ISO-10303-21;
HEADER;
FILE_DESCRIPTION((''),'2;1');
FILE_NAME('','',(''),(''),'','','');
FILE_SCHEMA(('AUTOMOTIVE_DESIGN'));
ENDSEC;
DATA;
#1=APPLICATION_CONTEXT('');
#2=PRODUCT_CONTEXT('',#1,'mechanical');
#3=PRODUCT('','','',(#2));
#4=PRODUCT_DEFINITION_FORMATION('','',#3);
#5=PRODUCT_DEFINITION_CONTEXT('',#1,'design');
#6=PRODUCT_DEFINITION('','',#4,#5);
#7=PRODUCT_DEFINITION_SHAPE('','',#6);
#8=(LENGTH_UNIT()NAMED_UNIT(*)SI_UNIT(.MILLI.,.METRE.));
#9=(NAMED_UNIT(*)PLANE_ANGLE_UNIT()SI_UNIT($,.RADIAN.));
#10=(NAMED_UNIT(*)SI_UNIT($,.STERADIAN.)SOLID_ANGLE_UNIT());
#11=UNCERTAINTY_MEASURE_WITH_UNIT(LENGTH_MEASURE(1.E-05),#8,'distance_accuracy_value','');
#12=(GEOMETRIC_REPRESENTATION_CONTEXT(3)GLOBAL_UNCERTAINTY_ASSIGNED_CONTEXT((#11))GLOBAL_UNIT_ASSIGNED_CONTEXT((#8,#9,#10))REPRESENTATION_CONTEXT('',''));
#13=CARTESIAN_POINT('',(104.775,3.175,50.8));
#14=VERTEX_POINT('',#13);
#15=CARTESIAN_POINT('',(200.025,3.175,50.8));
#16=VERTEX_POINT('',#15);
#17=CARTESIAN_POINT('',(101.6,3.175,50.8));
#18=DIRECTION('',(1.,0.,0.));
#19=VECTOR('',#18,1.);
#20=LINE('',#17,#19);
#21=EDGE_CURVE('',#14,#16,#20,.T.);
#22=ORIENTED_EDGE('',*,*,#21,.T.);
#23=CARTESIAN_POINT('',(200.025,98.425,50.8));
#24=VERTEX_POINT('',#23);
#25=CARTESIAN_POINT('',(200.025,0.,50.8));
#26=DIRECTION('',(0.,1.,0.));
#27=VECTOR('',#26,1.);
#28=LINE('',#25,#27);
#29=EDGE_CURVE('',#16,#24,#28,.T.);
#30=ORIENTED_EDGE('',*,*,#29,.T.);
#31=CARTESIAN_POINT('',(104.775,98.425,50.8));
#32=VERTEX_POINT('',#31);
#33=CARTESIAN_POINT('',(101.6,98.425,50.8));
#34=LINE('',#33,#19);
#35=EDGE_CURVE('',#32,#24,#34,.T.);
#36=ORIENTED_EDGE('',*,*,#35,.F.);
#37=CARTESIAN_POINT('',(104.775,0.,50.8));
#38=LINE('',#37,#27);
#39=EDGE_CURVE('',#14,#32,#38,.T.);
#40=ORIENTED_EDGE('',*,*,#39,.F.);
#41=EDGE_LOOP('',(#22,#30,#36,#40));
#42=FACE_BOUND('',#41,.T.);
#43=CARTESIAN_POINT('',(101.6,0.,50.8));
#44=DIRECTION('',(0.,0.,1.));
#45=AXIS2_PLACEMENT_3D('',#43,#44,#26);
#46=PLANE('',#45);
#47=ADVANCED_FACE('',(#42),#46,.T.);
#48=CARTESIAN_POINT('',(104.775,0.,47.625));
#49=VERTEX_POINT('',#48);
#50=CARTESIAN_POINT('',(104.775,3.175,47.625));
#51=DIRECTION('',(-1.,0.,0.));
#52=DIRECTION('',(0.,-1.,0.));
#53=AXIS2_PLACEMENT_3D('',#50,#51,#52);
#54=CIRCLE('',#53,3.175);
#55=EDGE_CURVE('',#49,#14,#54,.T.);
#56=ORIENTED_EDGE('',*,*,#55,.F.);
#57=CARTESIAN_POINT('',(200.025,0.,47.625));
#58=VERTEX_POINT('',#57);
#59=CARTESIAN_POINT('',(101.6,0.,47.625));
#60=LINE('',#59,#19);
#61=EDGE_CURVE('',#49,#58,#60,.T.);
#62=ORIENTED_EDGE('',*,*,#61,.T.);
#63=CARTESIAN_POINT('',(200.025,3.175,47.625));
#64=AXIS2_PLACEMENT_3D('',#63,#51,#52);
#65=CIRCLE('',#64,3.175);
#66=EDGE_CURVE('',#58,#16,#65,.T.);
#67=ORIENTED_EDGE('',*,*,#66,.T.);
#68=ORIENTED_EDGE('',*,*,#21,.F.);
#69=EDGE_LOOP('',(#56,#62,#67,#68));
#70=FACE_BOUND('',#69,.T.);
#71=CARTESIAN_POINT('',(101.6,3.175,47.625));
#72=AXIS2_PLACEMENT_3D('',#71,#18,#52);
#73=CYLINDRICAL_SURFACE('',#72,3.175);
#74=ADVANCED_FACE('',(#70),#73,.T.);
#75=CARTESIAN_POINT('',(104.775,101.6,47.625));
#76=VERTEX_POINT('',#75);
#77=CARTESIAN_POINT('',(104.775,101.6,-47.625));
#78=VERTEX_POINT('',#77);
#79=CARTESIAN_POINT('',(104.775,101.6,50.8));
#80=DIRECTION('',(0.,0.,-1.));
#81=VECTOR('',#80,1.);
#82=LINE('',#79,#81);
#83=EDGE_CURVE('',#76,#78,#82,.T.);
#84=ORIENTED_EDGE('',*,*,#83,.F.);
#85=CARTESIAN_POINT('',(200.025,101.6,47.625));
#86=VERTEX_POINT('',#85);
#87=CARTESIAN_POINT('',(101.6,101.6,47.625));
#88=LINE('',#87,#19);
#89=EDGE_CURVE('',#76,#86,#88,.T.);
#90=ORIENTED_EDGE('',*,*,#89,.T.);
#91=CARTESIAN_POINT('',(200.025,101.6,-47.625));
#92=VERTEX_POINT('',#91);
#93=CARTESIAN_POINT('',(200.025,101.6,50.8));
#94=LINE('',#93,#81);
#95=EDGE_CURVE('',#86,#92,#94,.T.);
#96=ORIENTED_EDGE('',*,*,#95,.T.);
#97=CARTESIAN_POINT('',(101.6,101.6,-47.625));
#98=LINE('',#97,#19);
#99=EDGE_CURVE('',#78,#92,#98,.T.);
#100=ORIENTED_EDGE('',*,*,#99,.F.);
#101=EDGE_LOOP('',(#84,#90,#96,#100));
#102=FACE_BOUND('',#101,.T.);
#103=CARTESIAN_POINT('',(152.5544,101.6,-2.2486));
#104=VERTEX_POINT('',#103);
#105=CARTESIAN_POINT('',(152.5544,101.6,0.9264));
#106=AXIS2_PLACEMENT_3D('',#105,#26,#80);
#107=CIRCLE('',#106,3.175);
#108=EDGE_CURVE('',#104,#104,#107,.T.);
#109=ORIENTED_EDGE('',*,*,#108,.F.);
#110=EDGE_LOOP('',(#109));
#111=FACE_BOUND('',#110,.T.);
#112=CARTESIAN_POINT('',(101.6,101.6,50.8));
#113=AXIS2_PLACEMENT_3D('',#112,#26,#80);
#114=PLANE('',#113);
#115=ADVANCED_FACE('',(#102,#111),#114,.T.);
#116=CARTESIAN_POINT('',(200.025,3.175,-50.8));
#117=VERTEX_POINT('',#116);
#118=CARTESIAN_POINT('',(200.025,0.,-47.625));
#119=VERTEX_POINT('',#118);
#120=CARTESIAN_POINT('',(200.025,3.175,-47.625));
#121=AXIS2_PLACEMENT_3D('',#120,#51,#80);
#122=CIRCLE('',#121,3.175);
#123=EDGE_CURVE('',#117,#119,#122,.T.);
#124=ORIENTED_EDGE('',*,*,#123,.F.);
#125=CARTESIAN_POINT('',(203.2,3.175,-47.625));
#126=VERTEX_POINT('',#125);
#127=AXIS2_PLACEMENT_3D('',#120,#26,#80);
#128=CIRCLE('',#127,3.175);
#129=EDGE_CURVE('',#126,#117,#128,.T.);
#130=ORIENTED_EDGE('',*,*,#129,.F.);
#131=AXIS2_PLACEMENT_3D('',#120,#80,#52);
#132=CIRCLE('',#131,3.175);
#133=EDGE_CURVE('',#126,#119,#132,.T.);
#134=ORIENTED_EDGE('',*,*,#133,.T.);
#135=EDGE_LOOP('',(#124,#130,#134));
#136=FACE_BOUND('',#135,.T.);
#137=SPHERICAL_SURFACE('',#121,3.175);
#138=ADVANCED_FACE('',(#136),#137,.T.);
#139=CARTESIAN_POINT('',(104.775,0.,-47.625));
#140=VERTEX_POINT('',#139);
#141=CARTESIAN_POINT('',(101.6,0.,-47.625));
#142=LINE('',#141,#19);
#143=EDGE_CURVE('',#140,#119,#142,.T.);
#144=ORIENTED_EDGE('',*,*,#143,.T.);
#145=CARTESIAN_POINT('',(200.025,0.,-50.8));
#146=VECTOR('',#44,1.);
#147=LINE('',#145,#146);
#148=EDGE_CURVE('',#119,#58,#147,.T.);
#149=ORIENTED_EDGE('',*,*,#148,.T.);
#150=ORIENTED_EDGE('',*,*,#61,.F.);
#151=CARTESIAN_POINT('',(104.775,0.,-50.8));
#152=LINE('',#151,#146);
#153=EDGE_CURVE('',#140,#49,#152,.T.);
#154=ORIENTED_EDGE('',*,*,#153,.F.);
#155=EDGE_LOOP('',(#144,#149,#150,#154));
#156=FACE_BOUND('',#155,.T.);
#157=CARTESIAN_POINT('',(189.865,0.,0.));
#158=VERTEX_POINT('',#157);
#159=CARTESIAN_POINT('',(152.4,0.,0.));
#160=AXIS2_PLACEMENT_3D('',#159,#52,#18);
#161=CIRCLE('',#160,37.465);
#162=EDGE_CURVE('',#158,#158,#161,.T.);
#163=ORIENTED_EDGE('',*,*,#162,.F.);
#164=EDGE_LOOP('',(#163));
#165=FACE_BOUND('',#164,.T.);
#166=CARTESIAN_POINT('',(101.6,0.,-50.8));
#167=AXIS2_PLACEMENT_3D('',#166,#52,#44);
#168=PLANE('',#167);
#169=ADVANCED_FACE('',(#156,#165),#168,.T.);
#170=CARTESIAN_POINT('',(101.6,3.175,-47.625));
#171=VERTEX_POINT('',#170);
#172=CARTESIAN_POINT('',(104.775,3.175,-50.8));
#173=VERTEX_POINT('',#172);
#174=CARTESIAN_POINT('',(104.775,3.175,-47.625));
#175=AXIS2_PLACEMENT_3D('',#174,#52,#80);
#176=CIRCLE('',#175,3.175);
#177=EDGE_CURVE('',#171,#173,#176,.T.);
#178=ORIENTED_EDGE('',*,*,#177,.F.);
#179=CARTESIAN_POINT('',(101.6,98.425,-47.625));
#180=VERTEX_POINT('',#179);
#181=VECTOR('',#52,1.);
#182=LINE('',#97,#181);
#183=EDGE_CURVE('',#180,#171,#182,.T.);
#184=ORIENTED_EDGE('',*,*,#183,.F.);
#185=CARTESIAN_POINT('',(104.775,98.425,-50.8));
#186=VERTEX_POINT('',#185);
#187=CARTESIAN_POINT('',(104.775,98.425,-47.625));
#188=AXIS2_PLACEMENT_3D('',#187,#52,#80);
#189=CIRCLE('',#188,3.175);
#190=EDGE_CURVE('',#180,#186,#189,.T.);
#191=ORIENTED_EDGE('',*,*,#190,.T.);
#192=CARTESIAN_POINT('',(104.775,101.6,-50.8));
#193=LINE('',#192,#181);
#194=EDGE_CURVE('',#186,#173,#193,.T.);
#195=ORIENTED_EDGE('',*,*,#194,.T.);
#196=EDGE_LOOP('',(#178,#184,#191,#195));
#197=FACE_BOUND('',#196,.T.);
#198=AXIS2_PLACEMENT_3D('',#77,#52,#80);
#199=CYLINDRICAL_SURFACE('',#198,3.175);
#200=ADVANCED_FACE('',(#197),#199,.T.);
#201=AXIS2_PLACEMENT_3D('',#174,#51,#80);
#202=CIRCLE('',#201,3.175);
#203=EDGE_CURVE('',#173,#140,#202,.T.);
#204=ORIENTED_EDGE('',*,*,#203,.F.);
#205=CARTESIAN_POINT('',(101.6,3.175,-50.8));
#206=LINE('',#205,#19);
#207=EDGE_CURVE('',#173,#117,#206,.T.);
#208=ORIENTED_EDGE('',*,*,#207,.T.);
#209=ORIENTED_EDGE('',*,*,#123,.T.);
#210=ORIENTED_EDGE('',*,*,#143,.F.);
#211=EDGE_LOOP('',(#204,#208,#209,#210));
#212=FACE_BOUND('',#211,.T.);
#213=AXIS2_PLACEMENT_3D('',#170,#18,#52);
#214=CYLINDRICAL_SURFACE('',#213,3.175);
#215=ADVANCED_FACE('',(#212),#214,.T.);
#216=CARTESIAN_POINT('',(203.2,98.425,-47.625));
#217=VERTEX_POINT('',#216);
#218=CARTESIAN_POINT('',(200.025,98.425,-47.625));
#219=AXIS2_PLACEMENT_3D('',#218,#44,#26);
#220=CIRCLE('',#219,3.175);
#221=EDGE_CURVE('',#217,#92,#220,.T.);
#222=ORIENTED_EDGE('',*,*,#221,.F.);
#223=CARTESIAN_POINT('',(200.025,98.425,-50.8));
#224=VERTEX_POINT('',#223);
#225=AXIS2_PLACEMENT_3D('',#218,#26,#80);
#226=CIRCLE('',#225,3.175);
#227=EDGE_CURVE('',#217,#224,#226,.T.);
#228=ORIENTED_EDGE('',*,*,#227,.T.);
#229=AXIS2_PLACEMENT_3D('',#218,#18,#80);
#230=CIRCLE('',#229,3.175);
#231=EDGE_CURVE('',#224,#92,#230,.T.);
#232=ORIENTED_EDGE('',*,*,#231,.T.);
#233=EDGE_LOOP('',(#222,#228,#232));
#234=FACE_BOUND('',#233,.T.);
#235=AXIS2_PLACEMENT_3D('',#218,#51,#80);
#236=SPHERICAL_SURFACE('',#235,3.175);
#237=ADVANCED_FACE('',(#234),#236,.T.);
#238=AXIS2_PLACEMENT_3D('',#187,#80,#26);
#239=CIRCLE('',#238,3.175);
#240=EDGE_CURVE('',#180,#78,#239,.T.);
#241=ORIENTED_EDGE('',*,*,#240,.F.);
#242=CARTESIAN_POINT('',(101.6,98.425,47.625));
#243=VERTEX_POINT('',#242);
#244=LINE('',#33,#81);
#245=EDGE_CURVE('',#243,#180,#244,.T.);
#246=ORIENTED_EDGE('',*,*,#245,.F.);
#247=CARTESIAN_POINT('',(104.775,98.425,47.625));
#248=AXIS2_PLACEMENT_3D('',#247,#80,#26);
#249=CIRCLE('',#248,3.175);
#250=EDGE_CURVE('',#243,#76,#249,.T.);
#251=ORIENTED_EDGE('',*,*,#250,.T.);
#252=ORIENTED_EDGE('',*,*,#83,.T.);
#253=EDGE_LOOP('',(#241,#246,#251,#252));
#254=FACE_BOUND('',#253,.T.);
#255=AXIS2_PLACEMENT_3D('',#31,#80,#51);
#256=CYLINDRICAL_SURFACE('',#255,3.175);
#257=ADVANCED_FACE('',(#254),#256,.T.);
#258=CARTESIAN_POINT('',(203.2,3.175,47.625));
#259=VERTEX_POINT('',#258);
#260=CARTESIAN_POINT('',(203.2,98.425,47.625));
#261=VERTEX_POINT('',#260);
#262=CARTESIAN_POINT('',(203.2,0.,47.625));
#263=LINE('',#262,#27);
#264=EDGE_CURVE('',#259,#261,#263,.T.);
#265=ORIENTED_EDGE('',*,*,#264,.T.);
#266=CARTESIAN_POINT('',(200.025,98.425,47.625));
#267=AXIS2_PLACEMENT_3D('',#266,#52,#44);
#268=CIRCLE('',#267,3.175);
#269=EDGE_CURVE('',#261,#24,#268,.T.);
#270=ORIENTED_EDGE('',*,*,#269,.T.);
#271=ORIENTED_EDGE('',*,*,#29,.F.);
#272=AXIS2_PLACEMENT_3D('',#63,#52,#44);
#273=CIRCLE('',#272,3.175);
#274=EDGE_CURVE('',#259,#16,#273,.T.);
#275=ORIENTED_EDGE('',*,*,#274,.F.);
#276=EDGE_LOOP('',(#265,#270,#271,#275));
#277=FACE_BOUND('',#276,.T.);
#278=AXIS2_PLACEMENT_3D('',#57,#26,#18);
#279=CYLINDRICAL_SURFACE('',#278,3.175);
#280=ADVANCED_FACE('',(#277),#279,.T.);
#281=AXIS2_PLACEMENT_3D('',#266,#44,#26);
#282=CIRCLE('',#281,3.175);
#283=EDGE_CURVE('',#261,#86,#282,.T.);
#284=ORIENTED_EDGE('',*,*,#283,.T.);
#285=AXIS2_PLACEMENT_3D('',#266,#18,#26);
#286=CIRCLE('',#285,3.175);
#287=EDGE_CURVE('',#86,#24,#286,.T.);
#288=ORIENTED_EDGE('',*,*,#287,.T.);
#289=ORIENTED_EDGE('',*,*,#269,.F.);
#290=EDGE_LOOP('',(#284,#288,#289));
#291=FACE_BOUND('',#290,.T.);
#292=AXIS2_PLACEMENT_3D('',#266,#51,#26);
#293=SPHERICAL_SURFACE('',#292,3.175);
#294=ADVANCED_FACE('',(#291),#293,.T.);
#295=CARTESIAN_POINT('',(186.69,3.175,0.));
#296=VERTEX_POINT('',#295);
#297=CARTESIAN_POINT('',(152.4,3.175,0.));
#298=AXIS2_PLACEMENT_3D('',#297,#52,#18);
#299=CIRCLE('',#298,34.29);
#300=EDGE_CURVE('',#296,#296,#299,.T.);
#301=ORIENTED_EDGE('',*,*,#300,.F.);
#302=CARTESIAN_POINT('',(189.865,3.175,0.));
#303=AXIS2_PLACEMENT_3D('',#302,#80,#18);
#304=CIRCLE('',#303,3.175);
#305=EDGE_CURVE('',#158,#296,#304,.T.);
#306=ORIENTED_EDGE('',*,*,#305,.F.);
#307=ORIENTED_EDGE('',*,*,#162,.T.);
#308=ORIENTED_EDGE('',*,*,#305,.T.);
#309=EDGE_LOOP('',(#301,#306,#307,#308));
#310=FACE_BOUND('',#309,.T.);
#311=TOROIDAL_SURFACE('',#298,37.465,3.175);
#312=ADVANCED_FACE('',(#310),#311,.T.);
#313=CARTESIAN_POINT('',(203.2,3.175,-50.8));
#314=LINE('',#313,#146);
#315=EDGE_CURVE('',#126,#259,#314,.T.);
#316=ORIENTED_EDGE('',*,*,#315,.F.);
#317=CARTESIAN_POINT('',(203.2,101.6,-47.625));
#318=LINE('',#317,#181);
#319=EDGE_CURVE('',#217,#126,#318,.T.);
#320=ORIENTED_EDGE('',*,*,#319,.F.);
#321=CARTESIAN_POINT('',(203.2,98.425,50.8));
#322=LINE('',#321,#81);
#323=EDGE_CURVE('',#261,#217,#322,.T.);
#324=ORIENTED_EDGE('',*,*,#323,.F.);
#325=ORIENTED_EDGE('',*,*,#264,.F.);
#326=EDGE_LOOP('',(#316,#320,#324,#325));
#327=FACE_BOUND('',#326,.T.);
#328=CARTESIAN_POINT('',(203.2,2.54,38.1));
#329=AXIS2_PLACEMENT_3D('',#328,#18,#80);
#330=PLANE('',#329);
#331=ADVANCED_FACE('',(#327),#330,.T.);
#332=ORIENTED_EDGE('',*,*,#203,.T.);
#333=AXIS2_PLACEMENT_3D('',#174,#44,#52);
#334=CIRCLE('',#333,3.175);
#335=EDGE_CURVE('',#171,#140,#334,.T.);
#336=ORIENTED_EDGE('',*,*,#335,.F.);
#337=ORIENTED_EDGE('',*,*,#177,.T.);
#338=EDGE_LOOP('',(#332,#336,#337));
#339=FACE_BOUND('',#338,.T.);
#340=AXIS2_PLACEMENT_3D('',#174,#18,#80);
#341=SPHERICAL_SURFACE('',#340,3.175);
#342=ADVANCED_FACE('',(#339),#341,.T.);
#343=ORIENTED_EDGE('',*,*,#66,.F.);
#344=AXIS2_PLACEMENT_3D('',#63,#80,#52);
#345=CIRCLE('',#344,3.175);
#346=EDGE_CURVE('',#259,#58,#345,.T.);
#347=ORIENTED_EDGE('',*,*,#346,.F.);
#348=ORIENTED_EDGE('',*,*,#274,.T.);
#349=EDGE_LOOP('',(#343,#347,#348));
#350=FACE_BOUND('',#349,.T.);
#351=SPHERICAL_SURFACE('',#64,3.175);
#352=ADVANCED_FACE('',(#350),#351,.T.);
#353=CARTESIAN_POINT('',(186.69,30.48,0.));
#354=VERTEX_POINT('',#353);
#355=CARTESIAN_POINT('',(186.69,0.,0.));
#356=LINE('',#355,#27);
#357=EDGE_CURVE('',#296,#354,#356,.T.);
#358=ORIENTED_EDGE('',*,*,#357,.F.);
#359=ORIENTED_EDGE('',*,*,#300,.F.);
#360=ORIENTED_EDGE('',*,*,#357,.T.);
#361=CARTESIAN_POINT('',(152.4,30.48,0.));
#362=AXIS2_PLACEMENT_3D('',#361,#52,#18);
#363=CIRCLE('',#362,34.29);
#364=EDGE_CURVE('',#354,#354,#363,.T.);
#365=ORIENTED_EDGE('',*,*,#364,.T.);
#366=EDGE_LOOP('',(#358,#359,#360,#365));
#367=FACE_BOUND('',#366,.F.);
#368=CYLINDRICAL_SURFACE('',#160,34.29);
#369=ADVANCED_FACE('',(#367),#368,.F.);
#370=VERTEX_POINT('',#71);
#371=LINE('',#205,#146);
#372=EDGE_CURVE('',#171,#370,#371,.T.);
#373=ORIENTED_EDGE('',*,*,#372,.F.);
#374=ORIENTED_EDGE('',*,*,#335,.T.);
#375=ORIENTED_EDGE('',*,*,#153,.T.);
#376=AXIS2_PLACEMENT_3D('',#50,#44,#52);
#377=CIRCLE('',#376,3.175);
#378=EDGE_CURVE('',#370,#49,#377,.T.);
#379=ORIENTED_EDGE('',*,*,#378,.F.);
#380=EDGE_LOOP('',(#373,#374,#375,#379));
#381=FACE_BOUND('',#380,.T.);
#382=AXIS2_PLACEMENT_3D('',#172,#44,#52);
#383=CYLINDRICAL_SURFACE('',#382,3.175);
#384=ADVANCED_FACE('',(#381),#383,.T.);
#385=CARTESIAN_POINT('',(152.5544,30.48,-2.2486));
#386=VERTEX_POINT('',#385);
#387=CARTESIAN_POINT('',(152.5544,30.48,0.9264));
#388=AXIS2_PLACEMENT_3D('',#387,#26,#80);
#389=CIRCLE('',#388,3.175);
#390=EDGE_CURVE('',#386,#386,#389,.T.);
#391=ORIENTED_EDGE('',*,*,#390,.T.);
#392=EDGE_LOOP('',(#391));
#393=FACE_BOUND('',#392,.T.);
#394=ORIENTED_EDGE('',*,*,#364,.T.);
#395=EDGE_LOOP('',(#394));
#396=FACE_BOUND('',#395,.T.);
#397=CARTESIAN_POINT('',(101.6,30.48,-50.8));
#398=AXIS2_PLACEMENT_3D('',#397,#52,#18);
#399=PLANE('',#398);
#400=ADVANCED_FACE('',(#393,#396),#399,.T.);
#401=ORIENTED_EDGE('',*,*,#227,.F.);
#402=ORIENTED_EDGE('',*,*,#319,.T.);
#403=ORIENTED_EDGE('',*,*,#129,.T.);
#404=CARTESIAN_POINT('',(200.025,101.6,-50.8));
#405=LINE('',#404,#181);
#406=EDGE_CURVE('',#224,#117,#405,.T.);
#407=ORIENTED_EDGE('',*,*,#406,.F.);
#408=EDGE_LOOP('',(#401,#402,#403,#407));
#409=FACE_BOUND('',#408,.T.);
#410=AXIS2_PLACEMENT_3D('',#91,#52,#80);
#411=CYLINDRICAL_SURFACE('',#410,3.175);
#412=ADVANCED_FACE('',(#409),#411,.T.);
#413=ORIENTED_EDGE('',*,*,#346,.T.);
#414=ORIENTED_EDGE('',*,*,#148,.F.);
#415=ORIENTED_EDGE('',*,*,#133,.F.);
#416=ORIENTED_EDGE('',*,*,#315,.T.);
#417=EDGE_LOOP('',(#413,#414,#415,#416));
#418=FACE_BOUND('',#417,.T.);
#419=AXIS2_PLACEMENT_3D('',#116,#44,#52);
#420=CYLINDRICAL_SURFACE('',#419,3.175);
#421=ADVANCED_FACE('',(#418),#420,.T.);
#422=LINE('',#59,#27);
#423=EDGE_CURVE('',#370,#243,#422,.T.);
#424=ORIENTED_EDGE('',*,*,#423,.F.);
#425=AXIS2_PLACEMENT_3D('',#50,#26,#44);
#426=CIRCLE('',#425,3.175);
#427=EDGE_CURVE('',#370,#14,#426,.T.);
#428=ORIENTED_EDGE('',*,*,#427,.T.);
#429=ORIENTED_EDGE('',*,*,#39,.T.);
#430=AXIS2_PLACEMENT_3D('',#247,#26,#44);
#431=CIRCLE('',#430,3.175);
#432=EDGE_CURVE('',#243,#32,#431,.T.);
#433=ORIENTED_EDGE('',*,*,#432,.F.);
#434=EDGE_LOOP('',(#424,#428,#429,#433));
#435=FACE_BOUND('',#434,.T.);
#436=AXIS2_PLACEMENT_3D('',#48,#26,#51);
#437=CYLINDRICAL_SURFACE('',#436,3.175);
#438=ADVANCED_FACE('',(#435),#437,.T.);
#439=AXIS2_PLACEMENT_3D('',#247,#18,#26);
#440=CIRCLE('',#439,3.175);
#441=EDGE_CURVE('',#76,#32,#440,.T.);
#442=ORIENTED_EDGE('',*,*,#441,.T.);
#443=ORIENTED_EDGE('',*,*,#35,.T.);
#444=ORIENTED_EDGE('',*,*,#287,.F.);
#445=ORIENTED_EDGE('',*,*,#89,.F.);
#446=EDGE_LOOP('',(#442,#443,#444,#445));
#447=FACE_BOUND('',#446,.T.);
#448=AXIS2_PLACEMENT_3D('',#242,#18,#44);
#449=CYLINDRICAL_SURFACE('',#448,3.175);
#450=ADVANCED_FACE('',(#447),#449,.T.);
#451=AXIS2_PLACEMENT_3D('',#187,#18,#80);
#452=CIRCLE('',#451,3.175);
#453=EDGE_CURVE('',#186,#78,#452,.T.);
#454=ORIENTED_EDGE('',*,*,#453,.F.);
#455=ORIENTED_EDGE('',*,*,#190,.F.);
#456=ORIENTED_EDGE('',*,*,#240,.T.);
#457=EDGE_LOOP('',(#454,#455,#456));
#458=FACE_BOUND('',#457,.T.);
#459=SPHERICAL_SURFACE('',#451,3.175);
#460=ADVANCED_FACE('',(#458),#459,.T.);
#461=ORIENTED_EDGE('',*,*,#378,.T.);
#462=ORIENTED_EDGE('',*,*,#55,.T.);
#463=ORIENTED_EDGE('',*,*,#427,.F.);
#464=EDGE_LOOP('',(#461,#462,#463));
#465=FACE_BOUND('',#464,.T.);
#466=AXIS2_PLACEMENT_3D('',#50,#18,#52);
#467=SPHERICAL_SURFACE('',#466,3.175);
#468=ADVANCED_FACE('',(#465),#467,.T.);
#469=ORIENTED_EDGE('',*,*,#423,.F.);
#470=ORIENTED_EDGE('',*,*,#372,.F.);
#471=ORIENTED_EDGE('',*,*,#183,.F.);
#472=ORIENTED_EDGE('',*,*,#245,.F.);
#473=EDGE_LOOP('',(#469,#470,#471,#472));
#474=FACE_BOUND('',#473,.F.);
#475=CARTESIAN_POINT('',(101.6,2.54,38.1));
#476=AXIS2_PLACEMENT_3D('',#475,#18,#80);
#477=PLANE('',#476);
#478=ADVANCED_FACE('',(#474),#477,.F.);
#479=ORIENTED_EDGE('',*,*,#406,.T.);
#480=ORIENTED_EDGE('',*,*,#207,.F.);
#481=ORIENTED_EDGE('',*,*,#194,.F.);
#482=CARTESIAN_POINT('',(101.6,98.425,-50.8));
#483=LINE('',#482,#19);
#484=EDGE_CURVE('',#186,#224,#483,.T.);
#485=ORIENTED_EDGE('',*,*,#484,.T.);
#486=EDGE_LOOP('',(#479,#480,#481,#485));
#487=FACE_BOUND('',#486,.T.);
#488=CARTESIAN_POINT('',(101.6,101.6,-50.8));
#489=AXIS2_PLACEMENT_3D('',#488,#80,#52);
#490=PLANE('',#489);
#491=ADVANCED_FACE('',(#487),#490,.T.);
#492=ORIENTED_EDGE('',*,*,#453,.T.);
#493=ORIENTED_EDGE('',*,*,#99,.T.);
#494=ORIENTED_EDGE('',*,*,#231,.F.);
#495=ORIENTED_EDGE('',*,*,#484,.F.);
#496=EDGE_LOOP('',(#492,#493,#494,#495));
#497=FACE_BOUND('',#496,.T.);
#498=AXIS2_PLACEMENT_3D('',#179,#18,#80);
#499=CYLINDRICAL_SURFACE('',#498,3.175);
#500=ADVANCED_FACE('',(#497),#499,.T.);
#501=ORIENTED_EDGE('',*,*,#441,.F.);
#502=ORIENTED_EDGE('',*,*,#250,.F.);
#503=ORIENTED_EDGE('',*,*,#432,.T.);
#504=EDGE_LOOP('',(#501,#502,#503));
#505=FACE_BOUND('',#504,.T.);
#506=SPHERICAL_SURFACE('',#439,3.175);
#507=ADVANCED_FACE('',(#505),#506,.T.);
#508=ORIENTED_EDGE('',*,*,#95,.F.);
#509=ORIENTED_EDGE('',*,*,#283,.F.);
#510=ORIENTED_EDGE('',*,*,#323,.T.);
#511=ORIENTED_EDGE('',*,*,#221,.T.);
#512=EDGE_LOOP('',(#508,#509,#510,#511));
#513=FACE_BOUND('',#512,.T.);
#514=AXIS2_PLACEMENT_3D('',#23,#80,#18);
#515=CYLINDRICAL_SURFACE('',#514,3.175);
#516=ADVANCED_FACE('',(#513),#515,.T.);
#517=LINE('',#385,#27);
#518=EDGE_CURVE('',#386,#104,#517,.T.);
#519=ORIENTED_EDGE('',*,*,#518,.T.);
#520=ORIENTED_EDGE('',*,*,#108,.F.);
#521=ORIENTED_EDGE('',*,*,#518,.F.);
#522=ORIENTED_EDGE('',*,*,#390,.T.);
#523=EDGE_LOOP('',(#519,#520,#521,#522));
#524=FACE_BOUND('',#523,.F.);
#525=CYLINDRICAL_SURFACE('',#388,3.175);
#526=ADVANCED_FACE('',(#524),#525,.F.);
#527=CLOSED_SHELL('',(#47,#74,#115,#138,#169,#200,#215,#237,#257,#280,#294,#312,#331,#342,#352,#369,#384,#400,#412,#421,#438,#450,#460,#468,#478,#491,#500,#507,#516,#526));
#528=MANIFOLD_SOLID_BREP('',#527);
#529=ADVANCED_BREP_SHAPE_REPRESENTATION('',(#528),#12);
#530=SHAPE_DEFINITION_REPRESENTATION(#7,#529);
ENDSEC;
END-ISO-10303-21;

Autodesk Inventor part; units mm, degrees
ref_plane "YZ Plane" through (0, 0, 0) normal (1, 0, 0) x (0, 1, 0)
ref_plane "XZ Plane" through (0, 0, 0) normal (0, 1, 0) x (-1, 0, 0)
ref_plane "XY Plane" through (0, 0, 0) normal (0, 0, 1) x (1, 0, 0)
ref_plane "Work Plane3" through (101.6, 2.54, 38.1) normal (1, 0, 0) x (0, 0, -1)
sketch "Sketch1" plane through (101.6, 2.54, 38.1) normal (1, 0, 0) x (0, 0, -1)
  line L0 (88.9, -2.54) -> (-12.7, -2.54)
  line L1 (-12.7, -2.54) -> (-12.7, 99.06)
  line L2 (-12.7, 99.06) -> (88.9, 99.06)
  line L3 (88.9, 99.06) -> (88.9, -2.54)
  point P0 (38.1, -2.54)
extrude "Extrusion1" add sketch "Sketch1" along normal blind 101.6
sketch "Sketch2" plane through (101.6, 0, -50.8) normal (0, -1, 0) x (1, 0, 0)
  circle A0 centre (50.8, 50.8) radius 34.29
  point P0 (-101.6, 50.8)
  dimension "d3" = 68.58
extrude "Extrusion2" cut sketch "Sketch2" against normal blind 30.48
fillet "Fillet5" radius 3.175 13 edges at (152.4, 0, -50.8) (152.4, 101.6, -50.8) (101.6, 50.8, -50.8) (203.2, 50.8, -50.8) (152.4, 0, 50.8) (101.6, 0, 0) (203.2, 0, 0) (118.11, 0, 0) (152.4, 101.6, 50.8) (101.6, 101.6, 0) (203.2, 101.6, 0) (101.6, 50.8, 50.8) (203.2, 50.8, 50.8)
sketch "Sketch7" plane through (152.4, 30.48, 0) normal (0, -1, 0) x (1, 0, 0)
  point P0 (-152.4, 0)
  point P1 (0.1544, 0.9264)
hole "Hole1" at (152.5544, 30.48, 0.9264) direction (0, 1, 0) diameter 6.35 end through all
properties part number "1x2 Block v2"
